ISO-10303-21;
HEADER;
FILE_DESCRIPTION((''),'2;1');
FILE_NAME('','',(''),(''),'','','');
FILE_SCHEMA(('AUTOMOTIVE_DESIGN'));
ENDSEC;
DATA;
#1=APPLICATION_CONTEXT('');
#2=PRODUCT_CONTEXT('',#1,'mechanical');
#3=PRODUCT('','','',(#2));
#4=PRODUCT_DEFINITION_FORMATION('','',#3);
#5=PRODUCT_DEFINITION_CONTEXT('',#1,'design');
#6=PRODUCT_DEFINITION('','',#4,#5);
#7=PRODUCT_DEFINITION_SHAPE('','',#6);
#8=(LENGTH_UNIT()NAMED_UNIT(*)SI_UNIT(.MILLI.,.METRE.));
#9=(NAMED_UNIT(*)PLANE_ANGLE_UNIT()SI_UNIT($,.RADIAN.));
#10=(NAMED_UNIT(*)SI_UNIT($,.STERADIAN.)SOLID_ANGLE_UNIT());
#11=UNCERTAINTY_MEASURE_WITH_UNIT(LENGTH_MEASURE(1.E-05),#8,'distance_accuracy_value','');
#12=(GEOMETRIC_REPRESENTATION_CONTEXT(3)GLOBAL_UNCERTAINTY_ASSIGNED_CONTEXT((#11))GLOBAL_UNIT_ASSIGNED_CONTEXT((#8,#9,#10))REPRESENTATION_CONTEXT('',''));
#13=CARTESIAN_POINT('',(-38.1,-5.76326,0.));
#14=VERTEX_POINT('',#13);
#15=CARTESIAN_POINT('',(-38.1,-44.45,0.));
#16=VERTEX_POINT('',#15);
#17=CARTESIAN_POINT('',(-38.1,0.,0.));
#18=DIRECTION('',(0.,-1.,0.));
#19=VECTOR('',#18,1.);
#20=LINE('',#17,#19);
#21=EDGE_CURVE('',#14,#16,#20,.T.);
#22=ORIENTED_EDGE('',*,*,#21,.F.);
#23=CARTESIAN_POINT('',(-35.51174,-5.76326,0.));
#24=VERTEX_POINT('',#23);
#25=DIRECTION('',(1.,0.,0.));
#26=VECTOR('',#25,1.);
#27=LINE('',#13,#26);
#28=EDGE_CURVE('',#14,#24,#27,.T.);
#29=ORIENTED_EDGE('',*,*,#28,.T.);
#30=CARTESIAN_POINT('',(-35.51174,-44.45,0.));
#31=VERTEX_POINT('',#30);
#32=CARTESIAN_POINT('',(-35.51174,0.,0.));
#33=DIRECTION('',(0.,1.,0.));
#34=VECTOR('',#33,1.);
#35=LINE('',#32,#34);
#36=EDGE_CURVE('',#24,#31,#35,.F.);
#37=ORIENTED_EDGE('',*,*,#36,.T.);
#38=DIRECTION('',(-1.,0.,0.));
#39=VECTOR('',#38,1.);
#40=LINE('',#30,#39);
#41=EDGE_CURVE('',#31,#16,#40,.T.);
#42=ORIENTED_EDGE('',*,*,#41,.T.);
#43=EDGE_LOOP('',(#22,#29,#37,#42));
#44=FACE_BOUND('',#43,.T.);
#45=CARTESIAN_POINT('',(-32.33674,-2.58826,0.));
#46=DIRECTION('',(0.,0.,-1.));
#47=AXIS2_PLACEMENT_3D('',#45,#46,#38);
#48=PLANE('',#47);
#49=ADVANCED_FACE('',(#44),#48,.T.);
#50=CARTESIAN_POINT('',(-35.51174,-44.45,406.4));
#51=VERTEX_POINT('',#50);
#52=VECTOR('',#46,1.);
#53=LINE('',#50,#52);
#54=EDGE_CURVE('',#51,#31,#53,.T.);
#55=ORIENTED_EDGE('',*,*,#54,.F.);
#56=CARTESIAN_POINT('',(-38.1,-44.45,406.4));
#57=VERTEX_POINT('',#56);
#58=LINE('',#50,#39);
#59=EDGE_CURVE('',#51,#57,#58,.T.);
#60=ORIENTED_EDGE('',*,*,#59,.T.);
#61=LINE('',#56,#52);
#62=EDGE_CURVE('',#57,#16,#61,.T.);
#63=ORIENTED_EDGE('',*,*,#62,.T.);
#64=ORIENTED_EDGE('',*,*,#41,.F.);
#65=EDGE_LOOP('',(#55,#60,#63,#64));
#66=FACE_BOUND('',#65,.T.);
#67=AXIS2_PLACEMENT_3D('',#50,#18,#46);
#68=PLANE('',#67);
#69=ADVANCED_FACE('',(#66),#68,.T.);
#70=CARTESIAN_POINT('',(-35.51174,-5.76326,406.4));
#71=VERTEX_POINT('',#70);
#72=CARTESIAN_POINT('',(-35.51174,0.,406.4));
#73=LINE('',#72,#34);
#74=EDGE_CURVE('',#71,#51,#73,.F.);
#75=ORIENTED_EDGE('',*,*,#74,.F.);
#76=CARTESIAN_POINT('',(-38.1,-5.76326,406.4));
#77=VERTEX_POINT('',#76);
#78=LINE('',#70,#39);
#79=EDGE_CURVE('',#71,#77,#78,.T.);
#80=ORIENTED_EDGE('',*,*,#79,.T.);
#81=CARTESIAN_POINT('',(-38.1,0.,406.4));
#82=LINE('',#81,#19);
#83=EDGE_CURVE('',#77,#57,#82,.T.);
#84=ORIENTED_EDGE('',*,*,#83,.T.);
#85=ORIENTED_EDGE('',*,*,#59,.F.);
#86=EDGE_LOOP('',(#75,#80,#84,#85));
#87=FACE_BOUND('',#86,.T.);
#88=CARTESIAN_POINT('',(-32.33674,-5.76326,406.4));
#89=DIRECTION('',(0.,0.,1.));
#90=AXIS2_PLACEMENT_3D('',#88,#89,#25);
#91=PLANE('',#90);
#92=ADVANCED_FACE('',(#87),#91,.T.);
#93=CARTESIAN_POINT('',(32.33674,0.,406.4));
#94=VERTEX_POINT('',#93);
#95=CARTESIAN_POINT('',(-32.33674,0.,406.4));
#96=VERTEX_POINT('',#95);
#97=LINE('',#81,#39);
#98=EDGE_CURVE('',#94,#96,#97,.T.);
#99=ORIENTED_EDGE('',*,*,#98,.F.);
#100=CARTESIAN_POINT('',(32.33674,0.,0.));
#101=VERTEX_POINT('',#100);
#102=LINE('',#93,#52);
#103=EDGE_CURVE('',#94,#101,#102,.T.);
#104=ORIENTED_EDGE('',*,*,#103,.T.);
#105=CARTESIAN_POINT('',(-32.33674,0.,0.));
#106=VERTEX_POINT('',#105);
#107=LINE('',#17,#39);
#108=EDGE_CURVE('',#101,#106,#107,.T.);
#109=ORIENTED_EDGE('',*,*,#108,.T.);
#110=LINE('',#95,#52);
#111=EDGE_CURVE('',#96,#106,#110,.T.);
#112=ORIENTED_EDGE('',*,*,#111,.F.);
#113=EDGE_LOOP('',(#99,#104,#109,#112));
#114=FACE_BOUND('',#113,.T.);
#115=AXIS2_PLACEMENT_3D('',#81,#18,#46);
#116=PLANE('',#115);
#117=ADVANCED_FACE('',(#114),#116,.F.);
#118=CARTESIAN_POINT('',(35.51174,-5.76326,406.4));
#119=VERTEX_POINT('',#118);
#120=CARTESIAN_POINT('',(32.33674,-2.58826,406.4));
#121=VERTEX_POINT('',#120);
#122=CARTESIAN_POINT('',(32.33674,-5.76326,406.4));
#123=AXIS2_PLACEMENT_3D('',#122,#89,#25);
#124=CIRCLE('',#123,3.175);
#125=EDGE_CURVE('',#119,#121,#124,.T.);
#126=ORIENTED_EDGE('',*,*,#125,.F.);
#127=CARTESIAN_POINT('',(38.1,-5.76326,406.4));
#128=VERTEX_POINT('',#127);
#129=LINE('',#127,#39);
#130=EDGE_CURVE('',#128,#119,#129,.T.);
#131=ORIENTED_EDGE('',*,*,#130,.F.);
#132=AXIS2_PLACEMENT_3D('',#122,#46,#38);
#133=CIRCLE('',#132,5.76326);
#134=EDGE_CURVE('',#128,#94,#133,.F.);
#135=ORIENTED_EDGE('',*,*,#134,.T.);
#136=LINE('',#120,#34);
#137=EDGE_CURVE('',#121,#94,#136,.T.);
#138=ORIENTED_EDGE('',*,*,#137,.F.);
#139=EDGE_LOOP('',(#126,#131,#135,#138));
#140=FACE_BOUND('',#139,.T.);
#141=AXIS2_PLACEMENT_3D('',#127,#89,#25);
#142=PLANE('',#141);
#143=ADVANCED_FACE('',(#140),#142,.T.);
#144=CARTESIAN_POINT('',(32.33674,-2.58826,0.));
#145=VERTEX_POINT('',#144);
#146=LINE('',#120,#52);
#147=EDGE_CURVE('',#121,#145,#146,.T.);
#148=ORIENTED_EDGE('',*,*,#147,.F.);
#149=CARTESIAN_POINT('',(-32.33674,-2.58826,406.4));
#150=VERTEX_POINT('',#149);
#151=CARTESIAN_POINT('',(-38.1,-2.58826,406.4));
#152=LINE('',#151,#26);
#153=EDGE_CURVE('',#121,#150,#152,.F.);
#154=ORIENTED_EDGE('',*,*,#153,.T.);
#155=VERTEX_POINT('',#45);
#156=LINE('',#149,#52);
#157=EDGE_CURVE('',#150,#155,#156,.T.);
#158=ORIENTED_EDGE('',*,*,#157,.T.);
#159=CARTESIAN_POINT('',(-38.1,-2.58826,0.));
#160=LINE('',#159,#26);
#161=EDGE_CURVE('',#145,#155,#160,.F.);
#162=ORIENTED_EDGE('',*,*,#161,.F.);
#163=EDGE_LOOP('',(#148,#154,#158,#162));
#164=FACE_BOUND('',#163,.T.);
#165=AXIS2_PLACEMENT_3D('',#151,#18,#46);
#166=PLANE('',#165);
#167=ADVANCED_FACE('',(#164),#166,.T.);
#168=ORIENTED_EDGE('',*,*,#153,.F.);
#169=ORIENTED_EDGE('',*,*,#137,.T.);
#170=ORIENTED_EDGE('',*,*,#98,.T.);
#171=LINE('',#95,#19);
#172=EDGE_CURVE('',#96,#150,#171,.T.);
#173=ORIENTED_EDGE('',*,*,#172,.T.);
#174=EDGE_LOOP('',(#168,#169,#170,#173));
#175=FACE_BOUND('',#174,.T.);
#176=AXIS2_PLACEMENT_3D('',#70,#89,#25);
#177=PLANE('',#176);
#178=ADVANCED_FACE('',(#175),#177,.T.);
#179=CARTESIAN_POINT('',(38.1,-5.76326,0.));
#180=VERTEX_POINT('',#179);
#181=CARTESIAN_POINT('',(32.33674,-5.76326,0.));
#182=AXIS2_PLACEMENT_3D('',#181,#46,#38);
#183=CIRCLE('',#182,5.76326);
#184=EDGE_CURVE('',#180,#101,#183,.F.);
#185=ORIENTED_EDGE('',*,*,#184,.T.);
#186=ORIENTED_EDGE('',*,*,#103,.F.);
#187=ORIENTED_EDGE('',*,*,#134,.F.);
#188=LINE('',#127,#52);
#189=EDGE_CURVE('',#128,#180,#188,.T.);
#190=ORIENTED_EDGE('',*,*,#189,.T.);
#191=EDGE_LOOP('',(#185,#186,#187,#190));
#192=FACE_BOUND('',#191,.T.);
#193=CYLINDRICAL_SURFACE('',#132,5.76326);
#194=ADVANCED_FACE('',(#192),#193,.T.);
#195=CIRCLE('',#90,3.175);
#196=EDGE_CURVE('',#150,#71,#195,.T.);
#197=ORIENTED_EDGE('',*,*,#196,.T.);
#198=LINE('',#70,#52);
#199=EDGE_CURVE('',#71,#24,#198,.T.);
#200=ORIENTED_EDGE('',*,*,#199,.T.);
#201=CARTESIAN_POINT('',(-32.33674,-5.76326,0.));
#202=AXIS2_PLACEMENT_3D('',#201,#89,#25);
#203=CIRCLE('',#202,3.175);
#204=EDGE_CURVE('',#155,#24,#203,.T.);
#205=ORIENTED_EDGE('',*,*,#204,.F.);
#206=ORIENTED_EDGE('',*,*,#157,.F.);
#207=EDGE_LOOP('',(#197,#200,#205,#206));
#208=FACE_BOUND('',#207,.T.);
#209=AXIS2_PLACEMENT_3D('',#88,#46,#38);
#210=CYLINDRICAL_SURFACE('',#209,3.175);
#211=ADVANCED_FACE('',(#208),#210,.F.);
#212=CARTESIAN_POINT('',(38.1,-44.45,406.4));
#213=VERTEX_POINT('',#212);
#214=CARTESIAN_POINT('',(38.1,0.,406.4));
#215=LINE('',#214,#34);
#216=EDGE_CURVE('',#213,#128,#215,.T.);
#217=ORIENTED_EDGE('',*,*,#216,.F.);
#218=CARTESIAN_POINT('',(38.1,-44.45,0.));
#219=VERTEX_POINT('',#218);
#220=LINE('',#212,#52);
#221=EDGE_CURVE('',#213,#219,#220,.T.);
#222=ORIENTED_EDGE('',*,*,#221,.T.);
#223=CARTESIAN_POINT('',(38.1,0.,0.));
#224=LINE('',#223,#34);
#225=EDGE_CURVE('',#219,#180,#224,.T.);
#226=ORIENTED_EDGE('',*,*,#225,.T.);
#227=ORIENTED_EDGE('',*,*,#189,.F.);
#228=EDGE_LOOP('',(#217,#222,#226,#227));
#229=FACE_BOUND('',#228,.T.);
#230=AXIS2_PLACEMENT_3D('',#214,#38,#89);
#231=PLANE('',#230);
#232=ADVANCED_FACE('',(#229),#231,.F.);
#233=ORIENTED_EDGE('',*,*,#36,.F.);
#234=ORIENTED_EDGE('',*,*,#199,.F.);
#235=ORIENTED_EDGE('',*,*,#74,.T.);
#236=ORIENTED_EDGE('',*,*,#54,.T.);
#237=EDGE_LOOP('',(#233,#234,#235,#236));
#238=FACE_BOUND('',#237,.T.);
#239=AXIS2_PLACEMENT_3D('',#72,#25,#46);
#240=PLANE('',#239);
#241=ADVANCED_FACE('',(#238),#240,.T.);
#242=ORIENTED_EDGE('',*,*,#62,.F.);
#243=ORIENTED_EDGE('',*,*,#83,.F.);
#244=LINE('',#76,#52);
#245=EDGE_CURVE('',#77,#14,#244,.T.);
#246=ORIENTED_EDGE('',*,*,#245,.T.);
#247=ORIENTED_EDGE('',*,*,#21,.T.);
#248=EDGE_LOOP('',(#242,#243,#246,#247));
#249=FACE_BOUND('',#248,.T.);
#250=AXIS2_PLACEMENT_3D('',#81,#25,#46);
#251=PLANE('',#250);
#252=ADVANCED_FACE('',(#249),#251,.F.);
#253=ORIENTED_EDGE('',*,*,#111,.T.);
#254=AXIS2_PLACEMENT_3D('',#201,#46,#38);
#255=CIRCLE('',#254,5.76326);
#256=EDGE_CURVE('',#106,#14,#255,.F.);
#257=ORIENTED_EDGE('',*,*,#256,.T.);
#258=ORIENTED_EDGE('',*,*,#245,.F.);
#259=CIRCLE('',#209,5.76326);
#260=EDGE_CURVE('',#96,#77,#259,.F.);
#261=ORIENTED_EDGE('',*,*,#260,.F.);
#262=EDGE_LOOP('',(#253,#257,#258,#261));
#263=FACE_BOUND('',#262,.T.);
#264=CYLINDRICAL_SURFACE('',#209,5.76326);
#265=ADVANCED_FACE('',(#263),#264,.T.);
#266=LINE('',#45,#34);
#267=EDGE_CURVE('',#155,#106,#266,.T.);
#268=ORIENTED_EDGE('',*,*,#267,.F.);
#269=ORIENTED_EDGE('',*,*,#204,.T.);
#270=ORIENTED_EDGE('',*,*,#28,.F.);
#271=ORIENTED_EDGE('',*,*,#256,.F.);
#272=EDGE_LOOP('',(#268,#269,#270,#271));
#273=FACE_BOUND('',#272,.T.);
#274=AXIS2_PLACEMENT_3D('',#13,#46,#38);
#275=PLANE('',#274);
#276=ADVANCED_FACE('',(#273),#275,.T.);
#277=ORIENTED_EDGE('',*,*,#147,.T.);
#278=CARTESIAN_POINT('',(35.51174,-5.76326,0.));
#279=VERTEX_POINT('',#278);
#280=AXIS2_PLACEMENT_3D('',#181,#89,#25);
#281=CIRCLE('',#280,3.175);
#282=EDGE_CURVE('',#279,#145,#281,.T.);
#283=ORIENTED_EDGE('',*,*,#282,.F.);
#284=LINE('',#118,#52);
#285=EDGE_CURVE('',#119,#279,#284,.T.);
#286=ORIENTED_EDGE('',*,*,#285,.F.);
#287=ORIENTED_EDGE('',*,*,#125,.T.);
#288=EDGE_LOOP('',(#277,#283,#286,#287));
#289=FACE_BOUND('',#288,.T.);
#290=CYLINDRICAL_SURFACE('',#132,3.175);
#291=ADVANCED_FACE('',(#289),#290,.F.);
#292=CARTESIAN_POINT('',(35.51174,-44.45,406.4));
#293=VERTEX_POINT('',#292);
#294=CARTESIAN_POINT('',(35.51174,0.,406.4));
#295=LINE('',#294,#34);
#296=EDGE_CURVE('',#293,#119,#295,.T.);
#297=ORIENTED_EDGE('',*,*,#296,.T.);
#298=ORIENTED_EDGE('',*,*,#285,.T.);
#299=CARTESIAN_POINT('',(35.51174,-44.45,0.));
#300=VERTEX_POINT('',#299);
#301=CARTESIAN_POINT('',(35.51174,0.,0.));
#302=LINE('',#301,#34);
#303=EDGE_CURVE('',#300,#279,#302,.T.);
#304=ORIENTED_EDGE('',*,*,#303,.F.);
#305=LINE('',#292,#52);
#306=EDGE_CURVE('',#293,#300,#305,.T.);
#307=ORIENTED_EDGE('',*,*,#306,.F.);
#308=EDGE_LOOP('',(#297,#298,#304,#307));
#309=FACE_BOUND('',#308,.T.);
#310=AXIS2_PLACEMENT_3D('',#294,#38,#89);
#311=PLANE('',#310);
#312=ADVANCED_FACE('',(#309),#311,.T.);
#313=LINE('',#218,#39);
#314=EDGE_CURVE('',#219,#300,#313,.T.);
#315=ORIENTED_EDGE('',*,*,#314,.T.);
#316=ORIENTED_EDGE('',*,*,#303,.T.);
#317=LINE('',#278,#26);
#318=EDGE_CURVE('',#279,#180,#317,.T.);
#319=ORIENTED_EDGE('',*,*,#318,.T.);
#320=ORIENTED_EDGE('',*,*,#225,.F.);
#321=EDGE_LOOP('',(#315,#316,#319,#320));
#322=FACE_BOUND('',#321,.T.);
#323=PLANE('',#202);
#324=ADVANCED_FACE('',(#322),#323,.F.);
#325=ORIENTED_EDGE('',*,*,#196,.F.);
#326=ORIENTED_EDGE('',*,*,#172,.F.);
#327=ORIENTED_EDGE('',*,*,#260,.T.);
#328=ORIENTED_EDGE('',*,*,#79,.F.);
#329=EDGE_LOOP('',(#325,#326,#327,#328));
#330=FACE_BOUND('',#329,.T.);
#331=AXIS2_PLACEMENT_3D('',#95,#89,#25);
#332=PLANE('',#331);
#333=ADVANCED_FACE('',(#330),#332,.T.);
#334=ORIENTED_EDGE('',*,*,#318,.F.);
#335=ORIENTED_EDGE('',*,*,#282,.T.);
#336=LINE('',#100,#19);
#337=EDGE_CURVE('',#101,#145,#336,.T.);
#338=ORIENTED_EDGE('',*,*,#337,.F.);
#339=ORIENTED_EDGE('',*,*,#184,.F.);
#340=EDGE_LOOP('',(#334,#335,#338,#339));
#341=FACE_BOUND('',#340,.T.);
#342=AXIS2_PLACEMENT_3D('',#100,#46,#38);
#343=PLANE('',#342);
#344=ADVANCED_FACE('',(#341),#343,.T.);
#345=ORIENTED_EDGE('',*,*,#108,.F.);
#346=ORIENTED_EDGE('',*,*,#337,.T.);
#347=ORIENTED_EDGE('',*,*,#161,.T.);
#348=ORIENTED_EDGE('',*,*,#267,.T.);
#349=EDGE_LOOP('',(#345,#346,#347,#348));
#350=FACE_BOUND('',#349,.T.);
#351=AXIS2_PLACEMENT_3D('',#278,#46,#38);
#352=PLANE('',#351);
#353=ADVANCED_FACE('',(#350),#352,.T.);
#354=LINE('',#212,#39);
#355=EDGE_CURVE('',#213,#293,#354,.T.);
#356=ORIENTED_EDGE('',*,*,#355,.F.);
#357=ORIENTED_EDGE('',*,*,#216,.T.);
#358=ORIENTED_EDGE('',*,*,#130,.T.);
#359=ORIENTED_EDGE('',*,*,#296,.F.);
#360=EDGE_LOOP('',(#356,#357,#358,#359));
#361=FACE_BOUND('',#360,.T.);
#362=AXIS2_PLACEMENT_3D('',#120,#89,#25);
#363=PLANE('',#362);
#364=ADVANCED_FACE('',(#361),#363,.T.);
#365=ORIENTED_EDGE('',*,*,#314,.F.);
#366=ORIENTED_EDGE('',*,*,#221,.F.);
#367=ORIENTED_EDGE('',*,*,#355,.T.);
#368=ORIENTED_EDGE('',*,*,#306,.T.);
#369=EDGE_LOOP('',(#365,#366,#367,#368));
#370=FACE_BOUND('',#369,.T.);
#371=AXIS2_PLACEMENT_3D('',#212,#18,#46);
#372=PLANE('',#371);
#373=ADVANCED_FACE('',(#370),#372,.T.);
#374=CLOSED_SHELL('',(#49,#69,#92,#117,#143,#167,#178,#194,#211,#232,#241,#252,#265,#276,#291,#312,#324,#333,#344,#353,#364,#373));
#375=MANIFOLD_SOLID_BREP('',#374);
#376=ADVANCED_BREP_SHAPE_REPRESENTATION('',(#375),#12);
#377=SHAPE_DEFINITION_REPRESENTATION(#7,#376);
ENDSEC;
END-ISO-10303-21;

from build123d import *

# Parameters (mm, degrees)
BASE_FLANGE1_DEPTH = 406.4


# Sheet-metal steps are written as plain solids
with BuildPart() as part:
    # Sketch1 → Base-Flange1 (new body)
    with BuildSketch(Plane.XY):
        with BuildLine():
            Line((38.1, -44.45), (38.1, -5.76326))
            ThreePointArc((38.1, -5.76326), (36.411980228, -1.688019772), (32.33674, 0))
            Line((32.33674, 0), (-32.33674, 0))
            ThreePointArc((-32.33674, 0), (-36.411980228, -1.688019772), (-38.1, -5.76326))
            Line((-38.1, -5.76326), (-38.1, -44.45))
            Line((-38.1, -44.45), (-35.51174, -44.45))
            Line((-35.51174, -44.45), (-35.51174, -5.76326))
            ThreePointArc((-35.51174, -5.76326), (-34.58180403, -3.51819597), (-32.33674, -2.58826))
            Line((-32.33674, -2.58826), (32.33674, -2.58826))
            ThreePointArc((32.33674, -2.58826), (34.58180403, -3.51819597), (35.51174, -5.76326))
            Line((35.51174, -5.76326), (35.51174, -44.45))
            Line((35.51174, -44.45), (38.1, -44.45))
        make_face()
    extrude(amount=BASE_FLANGE1_DEPTH)


solid = part.part
